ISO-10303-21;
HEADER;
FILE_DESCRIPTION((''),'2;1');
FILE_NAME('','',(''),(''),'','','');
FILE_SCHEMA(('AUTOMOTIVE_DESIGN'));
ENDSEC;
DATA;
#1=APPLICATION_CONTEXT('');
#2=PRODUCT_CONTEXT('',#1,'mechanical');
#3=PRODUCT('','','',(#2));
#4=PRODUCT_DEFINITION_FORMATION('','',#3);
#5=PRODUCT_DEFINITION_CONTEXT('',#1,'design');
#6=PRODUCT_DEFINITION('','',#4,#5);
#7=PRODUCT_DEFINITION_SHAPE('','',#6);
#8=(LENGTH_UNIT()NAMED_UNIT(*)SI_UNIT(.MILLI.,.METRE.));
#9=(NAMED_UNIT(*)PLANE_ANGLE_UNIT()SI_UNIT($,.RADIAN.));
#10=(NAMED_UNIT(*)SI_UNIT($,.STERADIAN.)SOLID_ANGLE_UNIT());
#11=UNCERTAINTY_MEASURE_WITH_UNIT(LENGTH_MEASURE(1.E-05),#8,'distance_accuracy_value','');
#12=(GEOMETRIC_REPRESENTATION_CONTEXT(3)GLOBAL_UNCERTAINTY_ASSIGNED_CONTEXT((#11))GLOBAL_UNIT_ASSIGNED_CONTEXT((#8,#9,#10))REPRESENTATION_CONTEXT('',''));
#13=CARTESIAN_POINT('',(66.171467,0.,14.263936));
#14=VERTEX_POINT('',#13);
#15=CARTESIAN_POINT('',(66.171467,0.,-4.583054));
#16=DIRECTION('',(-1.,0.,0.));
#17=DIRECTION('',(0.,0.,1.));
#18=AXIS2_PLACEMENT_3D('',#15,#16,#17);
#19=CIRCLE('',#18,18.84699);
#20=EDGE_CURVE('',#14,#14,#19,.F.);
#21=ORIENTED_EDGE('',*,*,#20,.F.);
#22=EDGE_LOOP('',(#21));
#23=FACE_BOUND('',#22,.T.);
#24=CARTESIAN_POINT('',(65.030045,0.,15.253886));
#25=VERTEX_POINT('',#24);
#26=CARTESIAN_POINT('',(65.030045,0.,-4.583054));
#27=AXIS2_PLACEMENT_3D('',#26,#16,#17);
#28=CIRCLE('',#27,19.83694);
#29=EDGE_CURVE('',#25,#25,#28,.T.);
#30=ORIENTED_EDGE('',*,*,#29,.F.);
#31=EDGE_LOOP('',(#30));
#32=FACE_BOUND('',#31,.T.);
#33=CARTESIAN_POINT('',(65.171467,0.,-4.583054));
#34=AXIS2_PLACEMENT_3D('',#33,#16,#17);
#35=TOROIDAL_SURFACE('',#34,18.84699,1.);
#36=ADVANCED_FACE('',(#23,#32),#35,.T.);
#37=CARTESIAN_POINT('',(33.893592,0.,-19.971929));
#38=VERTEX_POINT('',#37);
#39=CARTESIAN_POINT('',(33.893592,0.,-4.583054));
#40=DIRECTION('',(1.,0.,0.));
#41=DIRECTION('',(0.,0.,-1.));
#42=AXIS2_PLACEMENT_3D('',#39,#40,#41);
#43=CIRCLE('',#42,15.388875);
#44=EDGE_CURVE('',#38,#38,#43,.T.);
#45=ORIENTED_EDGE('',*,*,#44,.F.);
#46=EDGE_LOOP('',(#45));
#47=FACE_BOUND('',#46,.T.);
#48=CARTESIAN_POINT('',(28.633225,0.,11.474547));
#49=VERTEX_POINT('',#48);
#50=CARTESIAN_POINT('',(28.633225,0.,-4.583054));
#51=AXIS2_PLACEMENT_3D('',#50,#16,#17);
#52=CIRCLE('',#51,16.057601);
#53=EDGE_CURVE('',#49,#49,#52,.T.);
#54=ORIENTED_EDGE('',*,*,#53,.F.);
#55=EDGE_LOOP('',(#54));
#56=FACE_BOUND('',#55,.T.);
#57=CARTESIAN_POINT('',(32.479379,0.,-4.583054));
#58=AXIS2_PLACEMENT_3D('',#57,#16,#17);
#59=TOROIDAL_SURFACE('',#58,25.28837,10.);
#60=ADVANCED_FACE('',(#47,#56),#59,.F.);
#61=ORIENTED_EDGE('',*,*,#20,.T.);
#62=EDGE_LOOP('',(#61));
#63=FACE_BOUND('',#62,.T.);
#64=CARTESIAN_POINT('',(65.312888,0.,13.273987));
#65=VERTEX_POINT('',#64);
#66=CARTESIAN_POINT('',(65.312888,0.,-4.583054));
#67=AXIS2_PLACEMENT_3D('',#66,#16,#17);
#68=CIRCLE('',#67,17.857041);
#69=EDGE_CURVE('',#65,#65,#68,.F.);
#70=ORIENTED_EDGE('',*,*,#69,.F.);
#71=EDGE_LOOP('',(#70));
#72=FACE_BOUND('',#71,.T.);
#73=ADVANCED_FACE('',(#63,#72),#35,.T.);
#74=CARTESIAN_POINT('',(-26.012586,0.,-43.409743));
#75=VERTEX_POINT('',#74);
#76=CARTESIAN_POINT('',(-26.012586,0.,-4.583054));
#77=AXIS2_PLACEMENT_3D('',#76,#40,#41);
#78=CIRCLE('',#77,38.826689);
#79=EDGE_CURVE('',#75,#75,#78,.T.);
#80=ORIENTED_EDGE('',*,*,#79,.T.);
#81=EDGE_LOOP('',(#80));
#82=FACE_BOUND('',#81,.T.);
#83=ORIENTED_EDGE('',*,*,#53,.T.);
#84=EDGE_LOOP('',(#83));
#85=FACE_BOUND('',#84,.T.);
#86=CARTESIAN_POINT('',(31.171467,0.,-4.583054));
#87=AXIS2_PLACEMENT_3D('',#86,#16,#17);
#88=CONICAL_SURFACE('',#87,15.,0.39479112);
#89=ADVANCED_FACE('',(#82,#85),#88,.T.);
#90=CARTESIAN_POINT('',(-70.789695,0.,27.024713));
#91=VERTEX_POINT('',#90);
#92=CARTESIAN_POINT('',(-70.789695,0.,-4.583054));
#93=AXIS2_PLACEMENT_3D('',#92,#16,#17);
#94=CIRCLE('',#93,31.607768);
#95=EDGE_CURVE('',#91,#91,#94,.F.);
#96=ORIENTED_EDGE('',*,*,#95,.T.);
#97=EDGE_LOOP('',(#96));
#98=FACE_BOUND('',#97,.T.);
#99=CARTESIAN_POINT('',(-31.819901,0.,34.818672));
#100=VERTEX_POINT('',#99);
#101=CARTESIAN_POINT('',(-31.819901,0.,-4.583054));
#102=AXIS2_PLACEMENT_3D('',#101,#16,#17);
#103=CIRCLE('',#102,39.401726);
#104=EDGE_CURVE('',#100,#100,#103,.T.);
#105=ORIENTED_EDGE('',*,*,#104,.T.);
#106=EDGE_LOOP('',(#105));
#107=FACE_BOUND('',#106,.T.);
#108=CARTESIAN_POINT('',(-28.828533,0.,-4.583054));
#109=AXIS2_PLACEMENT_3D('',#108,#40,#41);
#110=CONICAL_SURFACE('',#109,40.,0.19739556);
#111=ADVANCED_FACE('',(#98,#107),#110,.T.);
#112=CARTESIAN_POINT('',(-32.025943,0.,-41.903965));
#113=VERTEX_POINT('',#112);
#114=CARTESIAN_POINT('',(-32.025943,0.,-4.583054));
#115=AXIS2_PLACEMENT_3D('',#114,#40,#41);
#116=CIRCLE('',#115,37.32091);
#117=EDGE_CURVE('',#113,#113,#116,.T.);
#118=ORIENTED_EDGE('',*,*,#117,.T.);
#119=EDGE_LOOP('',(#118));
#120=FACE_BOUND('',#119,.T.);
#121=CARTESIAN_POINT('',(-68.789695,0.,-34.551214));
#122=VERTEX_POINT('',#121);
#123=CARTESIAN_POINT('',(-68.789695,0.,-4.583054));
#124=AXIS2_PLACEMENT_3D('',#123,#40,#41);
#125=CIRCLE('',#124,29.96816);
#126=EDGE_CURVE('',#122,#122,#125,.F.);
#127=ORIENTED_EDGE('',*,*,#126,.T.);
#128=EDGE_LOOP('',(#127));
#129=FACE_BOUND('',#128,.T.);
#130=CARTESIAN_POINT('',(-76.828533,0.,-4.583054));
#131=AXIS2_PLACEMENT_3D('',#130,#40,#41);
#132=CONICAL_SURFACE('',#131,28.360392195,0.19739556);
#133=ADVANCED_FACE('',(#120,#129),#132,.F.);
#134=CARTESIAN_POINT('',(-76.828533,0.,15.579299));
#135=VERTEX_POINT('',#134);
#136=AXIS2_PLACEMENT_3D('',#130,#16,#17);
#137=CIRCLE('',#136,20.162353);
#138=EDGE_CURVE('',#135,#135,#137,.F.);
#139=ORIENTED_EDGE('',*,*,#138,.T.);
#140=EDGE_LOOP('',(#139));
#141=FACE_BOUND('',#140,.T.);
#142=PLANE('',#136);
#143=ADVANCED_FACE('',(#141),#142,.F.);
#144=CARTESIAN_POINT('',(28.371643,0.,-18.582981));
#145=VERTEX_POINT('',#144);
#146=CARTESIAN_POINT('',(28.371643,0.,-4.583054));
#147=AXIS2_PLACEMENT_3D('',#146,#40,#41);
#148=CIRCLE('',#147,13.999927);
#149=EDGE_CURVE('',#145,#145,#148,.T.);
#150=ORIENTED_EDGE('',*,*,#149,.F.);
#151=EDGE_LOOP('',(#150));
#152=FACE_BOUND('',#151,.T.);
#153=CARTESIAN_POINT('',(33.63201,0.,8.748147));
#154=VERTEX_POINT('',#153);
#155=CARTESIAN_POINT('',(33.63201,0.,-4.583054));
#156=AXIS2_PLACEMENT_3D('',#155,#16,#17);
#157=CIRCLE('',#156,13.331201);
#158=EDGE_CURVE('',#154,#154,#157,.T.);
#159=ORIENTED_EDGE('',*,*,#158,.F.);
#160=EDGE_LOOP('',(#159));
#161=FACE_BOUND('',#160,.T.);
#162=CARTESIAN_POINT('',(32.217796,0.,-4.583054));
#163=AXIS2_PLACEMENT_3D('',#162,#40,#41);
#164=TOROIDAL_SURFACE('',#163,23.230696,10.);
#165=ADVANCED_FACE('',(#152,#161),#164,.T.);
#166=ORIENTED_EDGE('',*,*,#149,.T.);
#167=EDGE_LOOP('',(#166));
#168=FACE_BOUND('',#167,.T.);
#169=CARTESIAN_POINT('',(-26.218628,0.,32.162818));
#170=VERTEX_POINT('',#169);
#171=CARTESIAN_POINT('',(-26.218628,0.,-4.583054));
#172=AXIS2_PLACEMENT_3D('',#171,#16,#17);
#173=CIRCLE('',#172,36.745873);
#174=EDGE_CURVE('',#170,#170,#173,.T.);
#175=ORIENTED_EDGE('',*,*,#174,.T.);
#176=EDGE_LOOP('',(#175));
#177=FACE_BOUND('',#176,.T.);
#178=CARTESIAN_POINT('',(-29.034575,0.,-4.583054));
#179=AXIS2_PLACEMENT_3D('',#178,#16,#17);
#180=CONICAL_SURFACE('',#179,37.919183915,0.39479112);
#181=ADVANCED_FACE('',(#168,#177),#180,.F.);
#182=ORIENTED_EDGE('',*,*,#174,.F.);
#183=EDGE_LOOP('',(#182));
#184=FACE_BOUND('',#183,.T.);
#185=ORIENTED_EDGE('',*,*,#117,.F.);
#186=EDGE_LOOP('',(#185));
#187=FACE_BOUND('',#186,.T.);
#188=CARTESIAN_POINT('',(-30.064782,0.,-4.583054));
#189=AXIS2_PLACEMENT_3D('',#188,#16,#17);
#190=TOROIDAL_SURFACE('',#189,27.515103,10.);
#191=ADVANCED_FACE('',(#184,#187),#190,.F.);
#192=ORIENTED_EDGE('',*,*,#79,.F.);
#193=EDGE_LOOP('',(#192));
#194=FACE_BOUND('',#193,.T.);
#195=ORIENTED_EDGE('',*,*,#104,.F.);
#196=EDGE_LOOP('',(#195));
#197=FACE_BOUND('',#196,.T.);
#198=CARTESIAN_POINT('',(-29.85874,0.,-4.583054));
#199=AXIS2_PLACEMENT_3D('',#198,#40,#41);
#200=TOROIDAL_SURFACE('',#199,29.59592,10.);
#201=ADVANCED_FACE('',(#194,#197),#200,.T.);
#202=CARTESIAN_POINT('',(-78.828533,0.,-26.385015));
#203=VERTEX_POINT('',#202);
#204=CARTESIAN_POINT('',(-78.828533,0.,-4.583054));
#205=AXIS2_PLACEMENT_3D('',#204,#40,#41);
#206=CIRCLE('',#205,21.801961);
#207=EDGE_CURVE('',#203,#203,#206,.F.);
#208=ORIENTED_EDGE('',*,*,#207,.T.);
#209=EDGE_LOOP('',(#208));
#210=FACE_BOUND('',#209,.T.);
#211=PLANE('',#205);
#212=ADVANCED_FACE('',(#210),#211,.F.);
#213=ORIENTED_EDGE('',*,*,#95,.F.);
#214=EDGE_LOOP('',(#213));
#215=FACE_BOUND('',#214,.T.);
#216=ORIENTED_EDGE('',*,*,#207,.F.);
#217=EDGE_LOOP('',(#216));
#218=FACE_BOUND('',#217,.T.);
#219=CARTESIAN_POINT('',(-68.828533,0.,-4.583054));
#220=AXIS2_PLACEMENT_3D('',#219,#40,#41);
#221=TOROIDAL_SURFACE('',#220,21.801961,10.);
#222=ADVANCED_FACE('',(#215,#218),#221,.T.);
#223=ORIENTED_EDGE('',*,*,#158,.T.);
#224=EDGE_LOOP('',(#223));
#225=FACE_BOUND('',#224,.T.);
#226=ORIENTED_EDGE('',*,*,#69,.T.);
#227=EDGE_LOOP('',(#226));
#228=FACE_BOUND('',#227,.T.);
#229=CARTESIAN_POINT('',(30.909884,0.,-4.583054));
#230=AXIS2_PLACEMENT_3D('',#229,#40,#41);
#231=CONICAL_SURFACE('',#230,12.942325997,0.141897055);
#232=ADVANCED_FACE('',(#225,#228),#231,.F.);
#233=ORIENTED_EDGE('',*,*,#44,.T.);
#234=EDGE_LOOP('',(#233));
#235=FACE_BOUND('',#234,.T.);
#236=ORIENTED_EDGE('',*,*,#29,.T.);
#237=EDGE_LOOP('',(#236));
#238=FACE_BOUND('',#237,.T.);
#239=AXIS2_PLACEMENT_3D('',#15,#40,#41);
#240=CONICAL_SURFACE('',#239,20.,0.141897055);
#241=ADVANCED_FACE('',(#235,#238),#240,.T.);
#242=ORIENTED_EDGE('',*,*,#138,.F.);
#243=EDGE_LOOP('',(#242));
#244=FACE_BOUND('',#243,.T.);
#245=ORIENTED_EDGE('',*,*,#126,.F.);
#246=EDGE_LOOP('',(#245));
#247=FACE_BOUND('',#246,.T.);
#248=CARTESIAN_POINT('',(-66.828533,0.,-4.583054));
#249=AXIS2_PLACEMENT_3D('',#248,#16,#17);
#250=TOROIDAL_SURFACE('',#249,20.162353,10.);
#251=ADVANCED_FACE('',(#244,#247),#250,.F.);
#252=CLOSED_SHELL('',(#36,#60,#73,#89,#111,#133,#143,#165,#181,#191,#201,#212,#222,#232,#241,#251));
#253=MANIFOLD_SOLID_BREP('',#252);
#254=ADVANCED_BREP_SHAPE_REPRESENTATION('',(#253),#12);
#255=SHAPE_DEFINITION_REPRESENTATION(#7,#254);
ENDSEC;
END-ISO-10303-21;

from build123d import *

# Parameters (mm, degrees)
FILLET_1_R = 1
FILLET_4_R = 10


with BuildPart() as part:
    # 스케치2 → 회전5 (revolve)
    with BuildSketch(Plane(origin=(0, 0, 0), x_dir=(1, 0, 0), z_dir=(0, 1, 0)), mode=Mode.PRIVATE) as revolve_5_sk:
        Polygon((-78.828533155, 4.583054253), (-78.828533155, 34.583054253), (-28.828533155, 44.583054253), (31.171466845, 19.583054253), (66.171466845, 24.583054253), (66.171466845, 22.562749164), (64.171466845, 22.277034878), (30.909884451, 17.525380251), (-29.034574551, 42.502238168), (-76.828533155, 32.943446448), (-76.828533155, 4.583054253), align=None)
    revolve(revolve_5_sk.sketch.rotate(Axis((-92.184862693, 0, -4.583054253), (1, 0, 0)), 180), axis=Axis((-92.184862693, 0, -4.583054253), (1, 0, 0)))

    # 필렛1
    fillet_1_edges = [part.edges().sort_by_distance(p)[0] for p in [
        (66.171466845, 0, -22.562749164),
        (66.171466845, 0, -24.583054253),
    ]]
    fillet(fillet_1_edges, radius=FILLET_1_R - 0.0001)  # a hair under: the kernel refuses the full size

    # 필렛4
    fillet_4_edges = [part.edges().sort_by_distance(p)[0] for p in [
        (-76.828533155, 0, -32.943446448),
        (-29.034574551, 0, -42.502238168),
        (30.909884451, 0, -17.525380251),
        (31.171466845, 0, -19.583054253),
        (-28.828533155, 0, -44.583054253),
        (-78.828533155, 0, -34.583054253),
    ]]
    fillet(fillet_4_edges, radius=FILLET_4_R)


solid = part.part
